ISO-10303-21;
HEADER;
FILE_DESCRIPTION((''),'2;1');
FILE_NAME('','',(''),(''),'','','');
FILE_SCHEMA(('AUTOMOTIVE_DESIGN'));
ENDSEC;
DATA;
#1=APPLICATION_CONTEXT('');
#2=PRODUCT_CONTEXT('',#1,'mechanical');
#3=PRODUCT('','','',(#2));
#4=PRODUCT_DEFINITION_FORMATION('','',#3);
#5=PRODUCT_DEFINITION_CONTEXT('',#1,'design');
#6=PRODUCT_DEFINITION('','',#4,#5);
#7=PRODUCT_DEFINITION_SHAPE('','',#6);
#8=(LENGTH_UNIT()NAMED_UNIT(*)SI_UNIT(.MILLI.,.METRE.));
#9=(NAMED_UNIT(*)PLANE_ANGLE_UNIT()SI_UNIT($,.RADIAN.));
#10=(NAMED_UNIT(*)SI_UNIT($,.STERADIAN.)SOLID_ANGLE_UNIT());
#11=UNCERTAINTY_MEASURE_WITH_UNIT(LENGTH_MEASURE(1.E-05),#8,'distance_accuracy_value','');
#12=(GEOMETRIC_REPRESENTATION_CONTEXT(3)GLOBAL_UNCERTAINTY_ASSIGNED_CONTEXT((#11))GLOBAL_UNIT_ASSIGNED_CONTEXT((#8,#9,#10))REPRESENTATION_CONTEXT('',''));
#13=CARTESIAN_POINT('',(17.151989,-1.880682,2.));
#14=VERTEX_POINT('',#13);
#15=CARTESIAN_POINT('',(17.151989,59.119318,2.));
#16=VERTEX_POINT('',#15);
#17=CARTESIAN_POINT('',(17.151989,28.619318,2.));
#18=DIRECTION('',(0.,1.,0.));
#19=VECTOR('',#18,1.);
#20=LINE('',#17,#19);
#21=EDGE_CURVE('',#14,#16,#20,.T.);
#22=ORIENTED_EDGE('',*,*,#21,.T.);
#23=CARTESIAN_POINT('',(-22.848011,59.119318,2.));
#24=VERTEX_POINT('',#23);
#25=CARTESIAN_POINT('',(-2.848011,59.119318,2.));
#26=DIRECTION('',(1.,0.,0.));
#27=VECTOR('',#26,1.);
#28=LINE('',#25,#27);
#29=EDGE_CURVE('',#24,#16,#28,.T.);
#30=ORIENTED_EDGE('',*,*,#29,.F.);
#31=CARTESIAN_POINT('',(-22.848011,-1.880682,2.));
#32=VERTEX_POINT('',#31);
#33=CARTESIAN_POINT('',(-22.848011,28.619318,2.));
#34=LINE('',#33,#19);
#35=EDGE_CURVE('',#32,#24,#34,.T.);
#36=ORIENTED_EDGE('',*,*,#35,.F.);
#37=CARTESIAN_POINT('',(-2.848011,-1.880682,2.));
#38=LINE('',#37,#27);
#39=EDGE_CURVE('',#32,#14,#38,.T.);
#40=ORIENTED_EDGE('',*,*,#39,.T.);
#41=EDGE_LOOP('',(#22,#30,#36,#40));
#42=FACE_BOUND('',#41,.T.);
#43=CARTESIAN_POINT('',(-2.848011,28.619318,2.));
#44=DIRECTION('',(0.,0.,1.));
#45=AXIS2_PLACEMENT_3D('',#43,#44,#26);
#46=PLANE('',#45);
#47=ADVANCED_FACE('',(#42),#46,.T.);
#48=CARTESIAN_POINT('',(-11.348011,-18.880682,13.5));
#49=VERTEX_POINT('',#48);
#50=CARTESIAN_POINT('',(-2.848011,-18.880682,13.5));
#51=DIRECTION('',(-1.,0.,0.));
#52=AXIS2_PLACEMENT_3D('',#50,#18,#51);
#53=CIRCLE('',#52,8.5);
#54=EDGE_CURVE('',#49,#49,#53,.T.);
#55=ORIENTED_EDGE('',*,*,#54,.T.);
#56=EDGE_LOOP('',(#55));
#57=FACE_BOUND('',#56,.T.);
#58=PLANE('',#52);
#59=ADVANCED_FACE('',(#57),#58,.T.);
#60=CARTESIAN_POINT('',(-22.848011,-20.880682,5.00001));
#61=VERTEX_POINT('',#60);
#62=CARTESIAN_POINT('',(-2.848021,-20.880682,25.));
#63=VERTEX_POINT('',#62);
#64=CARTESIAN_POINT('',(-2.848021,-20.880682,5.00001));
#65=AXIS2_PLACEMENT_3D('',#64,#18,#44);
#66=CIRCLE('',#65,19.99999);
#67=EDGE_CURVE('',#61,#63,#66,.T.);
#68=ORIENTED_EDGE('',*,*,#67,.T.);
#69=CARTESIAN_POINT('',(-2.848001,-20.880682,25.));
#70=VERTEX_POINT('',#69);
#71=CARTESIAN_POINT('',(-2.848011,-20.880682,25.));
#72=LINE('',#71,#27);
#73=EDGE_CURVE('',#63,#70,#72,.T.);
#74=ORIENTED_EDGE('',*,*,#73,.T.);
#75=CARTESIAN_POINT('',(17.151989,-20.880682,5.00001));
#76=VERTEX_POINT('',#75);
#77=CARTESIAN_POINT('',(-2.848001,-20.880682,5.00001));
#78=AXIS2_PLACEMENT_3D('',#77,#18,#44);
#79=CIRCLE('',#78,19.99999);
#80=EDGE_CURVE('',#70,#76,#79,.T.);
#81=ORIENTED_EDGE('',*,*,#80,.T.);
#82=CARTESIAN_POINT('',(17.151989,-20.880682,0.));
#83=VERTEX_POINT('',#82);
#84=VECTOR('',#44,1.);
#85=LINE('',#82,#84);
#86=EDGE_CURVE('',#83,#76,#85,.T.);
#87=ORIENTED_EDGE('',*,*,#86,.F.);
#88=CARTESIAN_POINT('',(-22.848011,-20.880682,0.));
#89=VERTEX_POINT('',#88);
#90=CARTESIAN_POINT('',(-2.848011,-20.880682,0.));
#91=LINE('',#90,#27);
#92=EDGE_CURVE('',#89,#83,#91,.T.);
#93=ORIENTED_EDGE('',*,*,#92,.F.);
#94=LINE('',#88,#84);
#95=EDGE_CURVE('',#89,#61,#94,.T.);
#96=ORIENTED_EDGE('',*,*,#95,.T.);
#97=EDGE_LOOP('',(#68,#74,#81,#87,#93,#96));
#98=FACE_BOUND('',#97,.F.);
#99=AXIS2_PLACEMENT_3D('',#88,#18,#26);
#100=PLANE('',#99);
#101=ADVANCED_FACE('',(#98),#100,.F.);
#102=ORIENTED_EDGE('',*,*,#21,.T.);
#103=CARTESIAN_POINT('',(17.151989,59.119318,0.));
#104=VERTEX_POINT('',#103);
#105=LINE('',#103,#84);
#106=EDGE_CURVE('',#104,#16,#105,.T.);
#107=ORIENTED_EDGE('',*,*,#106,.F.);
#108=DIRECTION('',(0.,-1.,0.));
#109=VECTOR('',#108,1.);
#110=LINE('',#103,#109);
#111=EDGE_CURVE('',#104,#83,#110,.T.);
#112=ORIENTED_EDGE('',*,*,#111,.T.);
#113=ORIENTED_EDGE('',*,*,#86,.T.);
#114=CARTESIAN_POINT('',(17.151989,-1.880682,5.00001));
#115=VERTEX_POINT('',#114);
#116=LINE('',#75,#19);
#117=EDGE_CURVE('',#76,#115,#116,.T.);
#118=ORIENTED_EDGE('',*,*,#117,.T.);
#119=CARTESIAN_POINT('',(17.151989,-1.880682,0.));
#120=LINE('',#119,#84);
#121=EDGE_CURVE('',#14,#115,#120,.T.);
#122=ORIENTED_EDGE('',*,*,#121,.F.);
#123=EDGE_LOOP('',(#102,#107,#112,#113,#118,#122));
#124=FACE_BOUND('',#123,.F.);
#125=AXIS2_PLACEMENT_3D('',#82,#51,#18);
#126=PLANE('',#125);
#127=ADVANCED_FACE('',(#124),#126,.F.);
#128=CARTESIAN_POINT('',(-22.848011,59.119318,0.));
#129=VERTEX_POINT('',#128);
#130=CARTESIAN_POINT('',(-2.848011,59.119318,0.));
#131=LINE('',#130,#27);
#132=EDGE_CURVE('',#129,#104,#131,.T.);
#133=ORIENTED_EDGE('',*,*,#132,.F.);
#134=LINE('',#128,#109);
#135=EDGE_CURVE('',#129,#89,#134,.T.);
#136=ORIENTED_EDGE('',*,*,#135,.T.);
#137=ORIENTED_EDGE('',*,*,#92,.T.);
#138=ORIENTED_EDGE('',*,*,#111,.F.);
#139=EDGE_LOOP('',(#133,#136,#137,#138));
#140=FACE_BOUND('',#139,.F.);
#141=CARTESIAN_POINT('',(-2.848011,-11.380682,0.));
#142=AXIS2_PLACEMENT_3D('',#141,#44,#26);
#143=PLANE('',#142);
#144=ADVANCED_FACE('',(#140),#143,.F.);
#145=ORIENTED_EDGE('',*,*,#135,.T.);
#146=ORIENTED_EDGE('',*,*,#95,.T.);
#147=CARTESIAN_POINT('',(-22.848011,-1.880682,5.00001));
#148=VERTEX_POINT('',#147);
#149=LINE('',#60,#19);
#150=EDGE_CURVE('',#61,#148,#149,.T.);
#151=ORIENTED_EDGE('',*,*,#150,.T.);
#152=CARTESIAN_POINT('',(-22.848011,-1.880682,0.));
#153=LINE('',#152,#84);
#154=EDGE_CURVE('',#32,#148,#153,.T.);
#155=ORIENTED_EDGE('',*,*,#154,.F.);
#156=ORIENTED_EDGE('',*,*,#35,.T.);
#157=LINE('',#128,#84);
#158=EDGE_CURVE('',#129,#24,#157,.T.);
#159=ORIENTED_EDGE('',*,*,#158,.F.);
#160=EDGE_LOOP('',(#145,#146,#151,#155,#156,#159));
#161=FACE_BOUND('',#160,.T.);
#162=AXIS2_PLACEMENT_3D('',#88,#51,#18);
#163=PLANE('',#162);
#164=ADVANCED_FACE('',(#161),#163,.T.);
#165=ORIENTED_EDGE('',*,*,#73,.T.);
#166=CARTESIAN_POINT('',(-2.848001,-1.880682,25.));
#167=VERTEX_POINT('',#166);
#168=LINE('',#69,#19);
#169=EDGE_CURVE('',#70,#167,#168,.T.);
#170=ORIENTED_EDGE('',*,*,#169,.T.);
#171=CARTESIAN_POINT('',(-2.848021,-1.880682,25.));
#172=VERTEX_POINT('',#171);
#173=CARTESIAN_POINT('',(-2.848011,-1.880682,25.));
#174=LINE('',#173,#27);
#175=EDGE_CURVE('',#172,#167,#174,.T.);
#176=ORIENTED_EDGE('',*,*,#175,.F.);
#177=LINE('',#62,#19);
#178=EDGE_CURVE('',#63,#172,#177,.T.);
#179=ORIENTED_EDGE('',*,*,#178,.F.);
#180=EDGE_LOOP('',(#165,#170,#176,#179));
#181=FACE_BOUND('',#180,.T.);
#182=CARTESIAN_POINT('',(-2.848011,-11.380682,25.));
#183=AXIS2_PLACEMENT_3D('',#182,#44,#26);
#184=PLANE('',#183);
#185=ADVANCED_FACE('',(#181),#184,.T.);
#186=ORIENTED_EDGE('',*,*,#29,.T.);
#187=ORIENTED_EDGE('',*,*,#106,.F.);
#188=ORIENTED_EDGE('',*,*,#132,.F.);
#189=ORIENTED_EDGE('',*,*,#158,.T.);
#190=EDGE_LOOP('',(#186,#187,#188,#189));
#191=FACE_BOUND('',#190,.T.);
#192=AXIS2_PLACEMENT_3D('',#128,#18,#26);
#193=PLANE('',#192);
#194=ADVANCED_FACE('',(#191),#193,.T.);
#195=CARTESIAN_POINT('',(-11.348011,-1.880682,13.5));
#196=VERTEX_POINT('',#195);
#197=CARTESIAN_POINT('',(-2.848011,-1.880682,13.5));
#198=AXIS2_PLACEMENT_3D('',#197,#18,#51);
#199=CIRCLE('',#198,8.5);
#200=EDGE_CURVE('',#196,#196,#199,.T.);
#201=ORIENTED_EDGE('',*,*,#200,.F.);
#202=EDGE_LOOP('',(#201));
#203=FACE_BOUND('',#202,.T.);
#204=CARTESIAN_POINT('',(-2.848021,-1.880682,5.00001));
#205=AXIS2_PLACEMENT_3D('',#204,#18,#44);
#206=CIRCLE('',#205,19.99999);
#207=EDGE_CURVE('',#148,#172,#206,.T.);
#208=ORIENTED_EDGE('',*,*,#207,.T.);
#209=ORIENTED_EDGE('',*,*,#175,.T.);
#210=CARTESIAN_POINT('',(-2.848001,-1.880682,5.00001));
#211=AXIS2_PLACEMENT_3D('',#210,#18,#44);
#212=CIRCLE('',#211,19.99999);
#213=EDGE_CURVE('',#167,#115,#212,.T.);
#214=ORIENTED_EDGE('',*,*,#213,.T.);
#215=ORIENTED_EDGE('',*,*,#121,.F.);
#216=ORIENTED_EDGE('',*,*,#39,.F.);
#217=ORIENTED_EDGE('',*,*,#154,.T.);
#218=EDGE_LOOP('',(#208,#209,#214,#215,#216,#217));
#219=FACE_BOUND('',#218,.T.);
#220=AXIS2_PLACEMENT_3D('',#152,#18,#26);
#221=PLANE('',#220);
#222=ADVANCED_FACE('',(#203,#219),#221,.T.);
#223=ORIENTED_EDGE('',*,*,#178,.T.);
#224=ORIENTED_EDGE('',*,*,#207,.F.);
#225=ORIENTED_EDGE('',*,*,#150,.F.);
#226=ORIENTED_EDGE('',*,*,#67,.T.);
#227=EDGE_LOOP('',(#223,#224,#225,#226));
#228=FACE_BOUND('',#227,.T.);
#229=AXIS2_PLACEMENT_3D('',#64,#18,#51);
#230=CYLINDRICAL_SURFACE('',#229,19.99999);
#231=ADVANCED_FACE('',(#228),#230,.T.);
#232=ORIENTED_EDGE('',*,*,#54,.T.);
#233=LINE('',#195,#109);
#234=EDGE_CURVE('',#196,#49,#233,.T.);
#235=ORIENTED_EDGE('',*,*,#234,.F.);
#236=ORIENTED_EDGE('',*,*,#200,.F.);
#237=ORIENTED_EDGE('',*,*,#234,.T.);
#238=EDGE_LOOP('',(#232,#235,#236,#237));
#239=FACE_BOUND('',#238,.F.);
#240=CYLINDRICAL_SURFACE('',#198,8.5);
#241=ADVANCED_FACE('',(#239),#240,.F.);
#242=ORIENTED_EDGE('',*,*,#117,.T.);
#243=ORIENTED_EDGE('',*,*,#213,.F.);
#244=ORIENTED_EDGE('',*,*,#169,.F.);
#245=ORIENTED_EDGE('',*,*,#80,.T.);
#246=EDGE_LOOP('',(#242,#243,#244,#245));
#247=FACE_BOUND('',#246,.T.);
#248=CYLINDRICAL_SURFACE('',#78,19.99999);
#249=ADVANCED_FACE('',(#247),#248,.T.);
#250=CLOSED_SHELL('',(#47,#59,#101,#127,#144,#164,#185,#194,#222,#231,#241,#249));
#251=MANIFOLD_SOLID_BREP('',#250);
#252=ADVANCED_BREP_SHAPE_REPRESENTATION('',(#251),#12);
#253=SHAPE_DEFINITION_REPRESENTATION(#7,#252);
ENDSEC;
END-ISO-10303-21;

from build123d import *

# Parameters (mm, degrees)
F0_W     = 40
F0_H     = 61
F1_DEPTH = 2
F0_H_2   = 19
F2_DEPTH = 25
F3_R     = 8.5
F4_DEPTH = 17
F5_R     = 19.99999


# Not quite as in the source:
# - a fillet or chamfer is up to 0.001 mm smaller than in the source, because OpenCascade refuses the exact size


with BuildPart() as f1:
    # F0 (on Top) → F1 (new body)
    with BuildSketch(Plane.XY):
        with Locations((-2.8480109572, 28.6193176061)):
            Rectangle(F0_W, F0_H)
    extrude(amount=F1_DEPTH)

    # F0 (on Top) → F2 (join)
    with BuildSketch(Plane.XY):
        with Locations((-2.8480109572, -11.3806823939)):
            Rectangle(F0_W, F0_H_2)
    extrude(amount=F2_DEPTH)

    # F3 (on face) → F4 (cut)
    with BuildSketch(Plane(origin=(0, -1.8806823939, 0), x_dir=(-1, 0, 0), z_dir=(0, 1, 0))):
        with Locations((2.8480109572, 13.5)):
            Circle(F3_R)
    extrude(amount=-F4_DEPTH, mode=Mode.SUBTRACT)

    # F5 (radius 20 in the source; OpenCascade refuses exactly that, so slightly less here)
    f5_edges = [f1.edges().sort_by_distance(p)[0] for p in [
        (17.151989, -11.380682, 25),
        (-22.848011, -11.380682, 25),
    ]]
    fillet(f5_edges, radius=F5_R)


solid = f1.part
